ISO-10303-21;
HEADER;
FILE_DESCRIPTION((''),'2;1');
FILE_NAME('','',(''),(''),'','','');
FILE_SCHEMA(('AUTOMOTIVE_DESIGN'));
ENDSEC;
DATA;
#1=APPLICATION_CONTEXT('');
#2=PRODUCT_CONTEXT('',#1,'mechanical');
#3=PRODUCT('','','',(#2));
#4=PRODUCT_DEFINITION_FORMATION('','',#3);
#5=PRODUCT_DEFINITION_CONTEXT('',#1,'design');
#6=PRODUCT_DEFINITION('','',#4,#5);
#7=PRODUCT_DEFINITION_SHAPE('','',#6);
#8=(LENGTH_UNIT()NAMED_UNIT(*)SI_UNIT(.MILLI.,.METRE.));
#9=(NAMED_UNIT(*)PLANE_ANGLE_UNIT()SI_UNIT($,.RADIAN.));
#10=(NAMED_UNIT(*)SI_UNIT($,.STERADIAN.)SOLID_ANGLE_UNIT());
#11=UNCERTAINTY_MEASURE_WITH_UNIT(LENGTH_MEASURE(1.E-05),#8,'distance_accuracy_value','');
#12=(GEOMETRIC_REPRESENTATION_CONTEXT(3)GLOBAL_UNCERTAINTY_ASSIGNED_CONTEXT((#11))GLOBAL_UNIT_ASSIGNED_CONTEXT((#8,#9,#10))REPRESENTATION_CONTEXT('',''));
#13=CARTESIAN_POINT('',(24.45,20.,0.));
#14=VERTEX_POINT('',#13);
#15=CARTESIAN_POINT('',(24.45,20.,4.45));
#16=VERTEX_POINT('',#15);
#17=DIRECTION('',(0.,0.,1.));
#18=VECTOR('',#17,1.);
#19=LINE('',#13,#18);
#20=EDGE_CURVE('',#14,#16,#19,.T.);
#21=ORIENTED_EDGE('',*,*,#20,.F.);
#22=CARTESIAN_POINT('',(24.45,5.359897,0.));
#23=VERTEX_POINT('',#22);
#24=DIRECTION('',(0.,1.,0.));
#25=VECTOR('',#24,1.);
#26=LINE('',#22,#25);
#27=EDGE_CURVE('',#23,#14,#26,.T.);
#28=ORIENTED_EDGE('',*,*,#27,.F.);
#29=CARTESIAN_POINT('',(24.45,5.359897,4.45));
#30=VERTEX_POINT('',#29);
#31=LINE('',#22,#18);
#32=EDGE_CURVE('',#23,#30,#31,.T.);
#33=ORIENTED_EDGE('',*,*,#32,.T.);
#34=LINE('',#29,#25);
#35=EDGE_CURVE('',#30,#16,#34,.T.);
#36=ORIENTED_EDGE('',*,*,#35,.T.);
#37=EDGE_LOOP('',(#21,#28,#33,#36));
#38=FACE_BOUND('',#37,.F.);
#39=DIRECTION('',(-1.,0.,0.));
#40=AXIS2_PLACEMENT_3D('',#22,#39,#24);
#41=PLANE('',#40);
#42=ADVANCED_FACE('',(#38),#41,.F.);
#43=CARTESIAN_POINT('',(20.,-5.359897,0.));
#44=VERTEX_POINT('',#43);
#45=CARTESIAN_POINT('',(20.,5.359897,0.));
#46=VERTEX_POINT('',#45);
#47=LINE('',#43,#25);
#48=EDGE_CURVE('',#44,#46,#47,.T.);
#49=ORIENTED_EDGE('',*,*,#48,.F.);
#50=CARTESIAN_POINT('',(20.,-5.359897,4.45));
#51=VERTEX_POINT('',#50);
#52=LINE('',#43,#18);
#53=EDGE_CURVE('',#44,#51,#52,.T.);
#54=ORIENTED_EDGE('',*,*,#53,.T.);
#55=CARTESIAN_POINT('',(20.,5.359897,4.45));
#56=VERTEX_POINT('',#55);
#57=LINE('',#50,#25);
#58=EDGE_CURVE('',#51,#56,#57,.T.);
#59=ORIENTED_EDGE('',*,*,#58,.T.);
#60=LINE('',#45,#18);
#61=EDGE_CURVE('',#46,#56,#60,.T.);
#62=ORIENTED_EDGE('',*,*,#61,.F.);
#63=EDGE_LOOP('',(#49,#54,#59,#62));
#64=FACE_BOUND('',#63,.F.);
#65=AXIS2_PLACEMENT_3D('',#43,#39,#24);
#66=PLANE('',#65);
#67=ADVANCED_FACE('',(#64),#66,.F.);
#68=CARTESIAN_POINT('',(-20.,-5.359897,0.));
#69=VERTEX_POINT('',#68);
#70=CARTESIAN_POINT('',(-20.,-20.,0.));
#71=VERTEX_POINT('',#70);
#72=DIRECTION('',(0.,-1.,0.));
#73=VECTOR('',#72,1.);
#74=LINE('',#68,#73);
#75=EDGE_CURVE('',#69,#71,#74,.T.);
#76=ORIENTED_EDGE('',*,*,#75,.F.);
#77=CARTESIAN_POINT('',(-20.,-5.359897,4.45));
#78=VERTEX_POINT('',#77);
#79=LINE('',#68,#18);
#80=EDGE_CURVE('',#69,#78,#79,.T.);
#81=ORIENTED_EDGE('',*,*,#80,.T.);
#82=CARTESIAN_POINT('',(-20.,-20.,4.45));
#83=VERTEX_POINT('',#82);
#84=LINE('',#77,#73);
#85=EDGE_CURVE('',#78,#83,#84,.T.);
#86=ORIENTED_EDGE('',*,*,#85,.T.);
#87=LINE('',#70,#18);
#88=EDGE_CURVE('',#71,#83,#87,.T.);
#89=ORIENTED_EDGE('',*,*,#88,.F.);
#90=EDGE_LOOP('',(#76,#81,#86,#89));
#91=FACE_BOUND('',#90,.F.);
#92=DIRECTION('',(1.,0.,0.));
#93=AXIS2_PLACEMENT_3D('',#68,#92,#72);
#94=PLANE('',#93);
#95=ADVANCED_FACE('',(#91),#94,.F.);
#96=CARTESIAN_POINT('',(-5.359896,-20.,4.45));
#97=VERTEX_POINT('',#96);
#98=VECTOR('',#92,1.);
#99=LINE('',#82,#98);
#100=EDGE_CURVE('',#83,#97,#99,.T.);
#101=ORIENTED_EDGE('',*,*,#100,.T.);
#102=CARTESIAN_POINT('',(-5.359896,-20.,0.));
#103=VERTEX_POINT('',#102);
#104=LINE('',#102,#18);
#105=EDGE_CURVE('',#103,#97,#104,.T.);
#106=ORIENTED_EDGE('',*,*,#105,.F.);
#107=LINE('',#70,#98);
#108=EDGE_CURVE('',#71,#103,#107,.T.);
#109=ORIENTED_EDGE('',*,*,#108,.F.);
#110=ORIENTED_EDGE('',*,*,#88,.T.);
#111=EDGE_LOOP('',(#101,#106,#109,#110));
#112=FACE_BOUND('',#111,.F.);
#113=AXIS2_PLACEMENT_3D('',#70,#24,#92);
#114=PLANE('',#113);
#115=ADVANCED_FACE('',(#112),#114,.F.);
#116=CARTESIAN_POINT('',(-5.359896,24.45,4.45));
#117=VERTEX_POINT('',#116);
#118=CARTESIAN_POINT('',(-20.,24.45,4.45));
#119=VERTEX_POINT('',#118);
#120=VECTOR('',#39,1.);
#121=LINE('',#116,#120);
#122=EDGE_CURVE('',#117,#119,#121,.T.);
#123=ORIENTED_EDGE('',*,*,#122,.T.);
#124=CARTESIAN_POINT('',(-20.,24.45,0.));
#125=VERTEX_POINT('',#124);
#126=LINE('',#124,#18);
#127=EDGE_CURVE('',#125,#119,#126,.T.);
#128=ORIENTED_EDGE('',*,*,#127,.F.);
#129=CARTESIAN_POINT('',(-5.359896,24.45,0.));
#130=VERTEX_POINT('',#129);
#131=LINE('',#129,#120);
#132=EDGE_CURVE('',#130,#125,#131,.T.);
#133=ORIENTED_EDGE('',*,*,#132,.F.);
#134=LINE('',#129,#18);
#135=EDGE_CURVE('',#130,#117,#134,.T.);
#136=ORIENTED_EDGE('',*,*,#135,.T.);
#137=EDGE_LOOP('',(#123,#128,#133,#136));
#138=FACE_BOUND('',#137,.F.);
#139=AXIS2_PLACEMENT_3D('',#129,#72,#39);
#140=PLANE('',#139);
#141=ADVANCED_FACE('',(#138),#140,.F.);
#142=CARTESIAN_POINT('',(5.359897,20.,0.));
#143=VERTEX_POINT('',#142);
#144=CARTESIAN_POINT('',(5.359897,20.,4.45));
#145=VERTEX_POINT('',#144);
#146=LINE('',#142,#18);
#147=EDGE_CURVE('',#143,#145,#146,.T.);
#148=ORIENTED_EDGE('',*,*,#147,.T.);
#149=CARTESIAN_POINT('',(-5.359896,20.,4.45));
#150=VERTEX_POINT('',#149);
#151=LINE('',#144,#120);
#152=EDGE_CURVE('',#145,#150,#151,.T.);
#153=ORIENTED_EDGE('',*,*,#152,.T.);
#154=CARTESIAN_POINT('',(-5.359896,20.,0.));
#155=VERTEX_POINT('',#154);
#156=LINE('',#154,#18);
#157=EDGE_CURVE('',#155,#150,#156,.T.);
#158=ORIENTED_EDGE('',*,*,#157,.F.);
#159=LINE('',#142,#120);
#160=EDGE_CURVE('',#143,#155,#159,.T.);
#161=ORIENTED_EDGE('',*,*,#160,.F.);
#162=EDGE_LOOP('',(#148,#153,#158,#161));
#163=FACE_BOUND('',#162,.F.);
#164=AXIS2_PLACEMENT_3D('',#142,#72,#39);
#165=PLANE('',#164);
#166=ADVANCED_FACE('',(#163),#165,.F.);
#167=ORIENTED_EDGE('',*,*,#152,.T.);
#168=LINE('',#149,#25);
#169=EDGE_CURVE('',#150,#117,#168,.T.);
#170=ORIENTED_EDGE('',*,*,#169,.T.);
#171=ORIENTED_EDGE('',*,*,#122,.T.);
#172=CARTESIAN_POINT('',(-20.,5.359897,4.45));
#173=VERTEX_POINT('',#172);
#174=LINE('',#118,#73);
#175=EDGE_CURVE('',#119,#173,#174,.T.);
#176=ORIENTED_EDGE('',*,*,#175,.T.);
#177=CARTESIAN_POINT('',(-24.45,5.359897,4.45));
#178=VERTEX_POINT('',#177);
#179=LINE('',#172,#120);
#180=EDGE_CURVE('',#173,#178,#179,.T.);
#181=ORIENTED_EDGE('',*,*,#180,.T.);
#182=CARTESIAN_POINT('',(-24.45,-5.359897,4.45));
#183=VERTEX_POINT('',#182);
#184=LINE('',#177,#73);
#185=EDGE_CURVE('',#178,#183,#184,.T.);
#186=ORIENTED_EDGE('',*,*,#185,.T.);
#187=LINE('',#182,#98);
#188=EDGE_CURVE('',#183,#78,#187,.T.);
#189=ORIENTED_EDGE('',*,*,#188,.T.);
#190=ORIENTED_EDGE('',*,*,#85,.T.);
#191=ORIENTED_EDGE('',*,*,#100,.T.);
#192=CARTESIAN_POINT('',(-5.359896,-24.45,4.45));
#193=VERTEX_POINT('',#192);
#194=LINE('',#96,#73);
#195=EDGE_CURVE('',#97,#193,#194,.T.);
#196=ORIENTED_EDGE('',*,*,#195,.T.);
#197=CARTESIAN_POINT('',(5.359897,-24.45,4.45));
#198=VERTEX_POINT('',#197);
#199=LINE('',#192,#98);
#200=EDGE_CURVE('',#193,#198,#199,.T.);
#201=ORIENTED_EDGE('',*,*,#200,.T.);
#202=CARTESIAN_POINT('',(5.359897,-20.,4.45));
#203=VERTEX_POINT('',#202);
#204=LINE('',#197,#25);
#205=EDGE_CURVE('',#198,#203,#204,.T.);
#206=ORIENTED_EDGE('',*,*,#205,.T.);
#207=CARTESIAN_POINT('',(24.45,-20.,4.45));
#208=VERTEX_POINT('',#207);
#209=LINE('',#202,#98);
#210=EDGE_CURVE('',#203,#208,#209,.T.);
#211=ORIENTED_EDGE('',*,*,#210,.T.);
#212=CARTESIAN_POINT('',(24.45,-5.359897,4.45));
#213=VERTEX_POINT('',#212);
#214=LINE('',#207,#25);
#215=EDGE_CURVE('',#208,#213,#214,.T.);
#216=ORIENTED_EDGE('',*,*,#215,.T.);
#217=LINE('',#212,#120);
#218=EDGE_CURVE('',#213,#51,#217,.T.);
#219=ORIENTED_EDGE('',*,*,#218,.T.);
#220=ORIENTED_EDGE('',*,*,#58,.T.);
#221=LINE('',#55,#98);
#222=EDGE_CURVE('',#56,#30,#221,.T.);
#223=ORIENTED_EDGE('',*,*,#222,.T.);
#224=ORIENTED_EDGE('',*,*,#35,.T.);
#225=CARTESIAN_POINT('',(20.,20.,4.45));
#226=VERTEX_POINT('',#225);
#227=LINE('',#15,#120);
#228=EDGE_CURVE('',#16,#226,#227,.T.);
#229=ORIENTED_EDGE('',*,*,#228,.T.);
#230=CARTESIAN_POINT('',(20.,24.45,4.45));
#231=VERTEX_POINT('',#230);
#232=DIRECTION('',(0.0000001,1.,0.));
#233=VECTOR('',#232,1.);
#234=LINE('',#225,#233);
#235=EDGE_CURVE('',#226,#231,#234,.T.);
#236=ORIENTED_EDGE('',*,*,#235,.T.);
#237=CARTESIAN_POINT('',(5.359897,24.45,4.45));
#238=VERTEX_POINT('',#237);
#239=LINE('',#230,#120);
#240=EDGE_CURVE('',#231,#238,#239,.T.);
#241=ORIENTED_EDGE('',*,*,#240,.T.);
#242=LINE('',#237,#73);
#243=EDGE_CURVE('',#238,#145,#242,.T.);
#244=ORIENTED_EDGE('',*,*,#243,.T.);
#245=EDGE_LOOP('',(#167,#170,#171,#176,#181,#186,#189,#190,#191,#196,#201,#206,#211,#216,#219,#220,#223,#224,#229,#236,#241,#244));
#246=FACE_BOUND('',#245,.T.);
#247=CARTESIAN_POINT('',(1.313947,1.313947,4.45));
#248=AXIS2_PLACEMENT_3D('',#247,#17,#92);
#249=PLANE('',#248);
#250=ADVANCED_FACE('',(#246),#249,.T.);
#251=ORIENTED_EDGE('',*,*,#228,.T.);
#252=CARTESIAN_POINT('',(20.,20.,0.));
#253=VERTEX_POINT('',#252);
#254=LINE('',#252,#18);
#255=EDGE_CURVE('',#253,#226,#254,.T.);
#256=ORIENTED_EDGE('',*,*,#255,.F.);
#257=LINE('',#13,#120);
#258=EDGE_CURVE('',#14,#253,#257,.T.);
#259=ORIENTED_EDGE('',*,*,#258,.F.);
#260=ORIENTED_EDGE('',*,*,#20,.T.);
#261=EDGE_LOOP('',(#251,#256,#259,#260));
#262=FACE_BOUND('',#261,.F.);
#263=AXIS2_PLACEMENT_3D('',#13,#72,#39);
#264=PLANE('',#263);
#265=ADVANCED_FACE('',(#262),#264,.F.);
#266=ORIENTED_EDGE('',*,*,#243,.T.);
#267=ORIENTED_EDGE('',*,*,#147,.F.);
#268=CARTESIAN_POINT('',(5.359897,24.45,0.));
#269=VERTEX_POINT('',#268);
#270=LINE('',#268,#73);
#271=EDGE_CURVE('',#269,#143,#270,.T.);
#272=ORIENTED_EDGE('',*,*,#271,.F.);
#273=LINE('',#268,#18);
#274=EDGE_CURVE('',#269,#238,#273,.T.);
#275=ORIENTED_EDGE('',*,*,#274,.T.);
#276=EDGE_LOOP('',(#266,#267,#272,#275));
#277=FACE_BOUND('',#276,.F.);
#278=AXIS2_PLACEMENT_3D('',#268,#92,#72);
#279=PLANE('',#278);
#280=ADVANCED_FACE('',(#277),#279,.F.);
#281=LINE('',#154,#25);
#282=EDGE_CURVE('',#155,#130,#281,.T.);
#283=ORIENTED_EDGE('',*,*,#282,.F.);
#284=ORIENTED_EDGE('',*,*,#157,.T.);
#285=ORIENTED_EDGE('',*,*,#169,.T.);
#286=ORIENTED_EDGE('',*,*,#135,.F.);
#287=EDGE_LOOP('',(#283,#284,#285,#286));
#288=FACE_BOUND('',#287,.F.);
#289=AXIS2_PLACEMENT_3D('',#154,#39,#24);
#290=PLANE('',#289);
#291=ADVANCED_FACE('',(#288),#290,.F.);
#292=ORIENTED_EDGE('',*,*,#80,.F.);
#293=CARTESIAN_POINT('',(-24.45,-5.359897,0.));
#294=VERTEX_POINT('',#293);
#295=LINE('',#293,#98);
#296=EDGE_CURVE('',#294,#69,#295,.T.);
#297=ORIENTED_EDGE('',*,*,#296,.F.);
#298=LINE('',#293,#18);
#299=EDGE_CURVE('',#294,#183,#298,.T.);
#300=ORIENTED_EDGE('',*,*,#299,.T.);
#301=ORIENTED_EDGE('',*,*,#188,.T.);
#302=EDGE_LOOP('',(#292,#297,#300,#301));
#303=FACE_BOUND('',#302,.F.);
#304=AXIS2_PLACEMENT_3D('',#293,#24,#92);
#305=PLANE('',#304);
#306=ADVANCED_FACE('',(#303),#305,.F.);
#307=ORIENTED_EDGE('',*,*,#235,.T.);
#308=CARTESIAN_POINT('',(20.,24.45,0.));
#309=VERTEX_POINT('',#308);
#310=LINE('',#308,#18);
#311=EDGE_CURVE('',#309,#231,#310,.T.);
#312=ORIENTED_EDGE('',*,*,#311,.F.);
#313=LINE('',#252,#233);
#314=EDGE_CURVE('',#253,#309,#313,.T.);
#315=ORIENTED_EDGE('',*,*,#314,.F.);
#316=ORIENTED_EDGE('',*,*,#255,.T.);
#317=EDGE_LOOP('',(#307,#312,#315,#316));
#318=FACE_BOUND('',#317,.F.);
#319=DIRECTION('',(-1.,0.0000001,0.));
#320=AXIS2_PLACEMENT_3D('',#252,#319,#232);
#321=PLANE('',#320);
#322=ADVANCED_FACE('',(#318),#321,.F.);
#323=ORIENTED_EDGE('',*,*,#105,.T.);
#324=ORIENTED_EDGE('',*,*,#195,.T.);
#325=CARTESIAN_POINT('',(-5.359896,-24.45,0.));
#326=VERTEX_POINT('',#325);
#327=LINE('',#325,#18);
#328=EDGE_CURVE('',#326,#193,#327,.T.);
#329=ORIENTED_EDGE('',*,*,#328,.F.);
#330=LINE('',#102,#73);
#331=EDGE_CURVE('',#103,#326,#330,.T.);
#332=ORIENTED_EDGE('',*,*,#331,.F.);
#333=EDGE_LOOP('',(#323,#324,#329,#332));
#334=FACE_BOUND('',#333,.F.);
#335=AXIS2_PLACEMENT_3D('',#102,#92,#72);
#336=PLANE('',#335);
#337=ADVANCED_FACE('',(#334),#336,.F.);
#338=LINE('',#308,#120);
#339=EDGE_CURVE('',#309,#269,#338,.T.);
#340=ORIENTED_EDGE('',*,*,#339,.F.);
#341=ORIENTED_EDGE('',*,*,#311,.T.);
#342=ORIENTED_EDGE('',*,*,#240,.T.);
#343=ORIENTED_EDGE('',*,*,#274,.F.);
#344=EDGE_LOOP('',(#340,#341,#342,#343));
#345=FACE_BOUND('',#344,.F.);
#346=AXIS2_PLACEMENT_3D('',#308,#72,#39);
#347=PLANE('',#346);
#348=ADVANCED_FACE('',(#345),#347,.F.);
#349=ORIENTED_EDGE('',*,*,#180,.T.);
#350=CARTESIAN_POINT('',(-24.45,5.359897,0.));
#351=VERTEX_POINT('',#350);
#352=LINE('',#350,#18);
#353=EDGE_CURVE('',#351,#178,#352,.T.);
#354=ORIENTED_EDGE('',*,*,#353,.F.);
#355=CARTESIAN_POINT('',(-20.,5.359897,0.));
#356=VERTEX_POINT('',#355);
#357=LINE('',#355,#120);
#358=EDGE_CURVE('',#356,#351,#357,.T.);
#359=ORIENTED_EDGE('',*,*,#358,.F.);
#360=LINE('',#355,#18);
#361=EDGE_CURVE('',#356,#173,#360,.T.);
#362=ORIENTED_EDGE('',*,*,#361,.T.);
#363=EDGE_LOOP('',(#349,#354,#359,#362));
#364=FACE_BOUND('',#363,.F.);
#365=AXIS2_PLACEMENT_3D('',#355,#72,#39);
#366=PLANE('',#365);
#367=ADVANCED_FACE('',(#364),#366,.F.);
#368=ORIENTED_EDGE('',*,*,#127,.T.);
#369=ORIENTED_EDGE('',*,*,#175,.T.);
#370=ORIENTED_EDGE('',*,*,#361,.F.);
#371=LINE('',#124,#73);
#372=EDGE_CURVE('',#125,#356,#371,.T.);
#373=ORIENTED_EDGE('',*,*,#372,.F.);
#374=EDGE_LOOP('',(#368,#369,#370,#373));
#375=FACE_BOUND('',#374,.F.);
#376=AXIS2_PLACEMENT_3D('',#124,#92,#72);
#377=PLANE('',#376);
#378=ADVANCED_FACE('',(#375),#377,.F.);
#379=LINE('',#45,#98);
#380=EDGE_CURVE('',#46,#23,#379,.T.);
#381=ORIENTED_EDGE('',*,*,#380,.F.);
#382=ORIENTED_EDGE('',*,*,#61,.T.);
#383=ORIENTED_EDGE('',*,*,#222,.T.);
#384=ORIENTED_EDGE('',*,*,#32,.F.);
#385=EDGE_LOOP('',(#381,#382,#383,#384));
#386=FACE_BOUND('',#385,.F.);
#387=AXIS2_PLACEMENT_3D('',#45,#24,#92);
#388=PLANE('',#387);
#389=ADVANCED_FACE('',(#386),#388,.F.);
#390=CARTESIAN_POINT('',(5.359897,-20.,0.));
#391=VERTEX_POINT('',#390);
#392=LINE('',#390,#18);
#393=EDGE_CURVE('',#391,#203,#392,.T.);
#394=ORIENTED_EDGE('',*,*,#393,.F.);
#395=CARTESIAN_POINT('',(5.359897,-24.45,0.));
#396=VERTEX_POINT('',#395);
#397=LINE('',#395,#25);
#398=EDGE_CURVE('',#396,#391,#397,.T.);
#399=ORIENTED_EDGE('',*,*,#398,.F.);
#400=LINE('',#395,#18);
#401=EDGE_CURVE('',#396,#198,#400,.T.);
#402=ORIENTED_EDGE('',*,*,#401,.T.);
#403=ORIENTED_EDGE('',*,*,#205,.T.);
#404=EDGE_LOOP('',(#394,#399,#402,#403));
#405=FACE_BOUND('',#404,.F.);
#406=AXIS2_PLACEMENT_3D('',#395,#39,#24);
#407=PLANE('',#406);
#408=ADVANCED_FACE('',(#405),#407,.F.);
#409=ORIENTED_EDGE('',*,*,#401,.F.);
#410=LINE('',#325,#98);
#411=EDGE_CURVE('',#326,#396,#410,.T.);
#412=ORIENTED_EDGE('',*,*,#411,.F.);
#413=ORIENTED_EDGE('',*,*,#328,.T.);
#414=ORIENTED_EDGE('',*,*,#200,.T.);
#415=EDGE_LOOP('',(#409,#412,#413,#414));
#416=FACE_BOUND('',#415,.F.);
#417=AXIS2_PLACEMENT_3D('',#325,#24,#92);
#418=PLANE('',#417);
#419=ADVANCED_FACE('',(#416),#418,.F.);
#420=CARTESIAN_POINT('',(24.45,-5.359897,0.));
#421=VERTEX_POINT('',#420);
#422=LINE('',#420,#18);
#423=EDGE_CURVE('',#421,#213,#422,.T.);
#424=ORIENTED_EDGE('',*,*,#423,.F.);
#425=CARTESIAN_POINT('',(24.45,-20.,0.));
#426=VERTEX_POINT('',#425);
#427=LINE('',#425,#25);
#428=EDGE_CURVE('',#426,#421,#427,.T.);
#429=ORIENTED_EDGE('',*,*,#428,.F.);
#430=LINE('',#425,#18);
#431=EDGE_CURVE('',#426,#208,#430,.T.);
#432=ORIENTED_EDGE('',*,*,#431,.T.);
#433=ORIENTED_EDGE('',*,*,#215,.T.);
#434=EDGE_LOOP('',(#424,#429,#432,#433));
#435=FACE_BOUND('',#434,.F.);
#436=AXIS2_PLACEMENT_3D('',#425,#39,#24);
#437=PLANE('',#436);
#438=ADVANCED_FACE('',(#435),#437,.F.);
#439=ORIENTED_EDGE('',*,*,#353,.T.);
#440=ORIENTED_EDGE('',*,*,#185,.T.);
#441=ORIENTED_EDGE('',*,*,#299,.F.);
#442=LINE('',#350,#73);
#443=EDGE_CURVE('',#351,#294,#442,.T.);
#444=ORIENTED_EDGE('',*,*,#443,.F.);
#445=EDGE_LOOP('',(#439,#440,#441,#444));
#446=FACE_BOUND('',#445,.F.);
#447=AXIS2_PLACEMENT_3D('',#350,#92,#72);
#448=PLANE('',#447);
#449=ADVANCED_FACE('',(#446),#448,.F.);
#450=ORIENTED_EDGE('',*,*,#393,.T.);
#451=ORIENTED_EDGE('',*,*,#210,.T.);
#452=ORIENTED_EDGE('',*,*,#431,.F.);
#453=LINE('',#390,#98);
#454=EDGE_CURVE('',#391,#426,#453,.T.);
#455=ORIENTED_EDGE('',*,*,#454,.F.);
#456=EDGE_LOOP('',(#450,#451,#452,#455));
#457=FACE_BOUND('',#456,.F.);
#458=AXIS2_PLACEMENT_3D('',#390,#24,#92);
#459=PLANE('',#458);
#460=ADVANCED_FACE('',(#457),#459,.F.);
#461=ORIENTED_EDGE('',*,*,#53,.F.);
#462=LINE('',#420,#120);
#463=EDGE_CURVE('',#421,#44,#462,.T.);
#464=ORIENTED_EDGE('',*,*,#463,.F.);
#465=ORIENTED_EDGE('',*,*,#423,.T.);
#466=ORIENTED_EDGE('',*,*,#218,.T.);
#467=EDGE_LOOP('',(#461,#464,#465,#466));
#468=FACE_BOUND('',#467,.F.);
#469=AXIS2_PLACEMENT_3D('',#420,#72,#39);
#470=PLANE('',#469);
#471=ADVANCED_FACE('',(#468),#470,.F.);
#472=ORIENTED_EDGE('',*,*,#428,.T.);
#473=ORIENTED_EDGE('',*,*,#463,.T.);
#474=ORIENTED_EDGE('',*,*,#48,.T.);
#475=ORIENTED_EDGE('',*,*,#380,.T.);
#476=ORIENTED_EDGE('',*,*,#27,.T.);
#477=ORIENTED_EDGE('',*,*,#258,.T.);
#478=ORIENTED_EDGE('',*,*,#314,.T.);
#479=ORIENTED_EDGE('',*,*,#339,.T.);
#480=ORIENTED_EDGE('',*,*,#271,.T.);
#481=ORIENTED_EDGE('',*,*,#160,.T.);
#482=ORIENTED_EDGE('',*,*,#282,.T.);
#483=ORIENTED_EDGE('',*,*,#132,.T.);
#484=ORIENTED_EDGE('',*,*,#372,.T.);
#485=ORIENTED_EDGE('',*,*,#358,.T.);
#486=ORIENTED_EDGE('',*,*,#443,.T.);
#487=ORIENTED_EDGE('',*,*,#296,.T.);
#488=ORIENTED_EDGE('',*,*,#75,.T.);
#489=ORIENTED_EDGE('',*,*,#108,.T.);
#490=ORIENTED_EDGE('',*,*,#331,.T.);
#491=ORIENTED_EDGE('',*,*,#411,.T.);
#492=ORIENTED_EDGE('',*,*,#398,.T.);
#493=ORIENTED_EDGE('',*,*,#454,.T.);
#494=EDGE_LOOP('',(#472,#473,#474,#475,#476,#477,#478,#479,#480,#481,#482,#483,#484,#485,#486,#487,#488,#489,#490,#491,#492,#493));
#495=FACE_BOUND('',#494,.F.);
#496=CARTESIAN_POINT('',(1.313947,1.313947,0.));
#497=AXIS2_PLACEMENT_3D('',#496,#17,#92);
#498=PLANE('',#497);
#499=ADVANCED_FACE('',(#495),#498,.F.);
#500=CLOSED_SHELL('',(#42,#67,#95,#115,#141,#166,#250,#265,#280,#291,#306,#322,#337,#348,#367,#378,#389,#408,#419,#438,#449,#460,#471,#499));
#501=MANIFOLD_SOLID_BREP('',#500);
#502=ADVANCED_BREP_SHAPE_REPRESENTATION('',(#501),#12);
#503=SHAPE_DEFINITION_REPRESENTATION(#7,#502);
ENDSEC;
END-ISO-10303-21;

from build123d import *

# Parameters (mm, degrees)
F1_DEPTH = 4.45


# Not quite as in the source:
# - ends of sketch curves that miss each other by under 0.0002 mm in the source are joined


with BuildPart() as f1:
    # F0 (on Top) → F1 (new body)
    with BuildSketch(Plane.XY):
        Polygon((5.359896815, -20), (20, -20), (24.450000447, -20), (24.450000447, -5.3598965915), (20.000000447, -5.3598965915), (20.000000447, 5.3598965915), (24.450000447, 5.3598965915), (24.450000447, 20), (20, 20), (20.000000447, 24.45), (5.359896815, 24.45), (5.359896815, 20), (-5.359896368, 20), (-5.359896368, 24.45), (-20, 24.45), (-20, 20), (-20, 5.3598965915), (-24.450000447, 5.3598965915), (-24.450000447, -5.3598965915), (-20, -5.3598965915), (-20, -20), (-5.359896368, -20), (-5.359896368, -24.45), (5.359896815, -24.45), align=None)
    extrude(amount=F1_DEPTH)


solid = f1.part
